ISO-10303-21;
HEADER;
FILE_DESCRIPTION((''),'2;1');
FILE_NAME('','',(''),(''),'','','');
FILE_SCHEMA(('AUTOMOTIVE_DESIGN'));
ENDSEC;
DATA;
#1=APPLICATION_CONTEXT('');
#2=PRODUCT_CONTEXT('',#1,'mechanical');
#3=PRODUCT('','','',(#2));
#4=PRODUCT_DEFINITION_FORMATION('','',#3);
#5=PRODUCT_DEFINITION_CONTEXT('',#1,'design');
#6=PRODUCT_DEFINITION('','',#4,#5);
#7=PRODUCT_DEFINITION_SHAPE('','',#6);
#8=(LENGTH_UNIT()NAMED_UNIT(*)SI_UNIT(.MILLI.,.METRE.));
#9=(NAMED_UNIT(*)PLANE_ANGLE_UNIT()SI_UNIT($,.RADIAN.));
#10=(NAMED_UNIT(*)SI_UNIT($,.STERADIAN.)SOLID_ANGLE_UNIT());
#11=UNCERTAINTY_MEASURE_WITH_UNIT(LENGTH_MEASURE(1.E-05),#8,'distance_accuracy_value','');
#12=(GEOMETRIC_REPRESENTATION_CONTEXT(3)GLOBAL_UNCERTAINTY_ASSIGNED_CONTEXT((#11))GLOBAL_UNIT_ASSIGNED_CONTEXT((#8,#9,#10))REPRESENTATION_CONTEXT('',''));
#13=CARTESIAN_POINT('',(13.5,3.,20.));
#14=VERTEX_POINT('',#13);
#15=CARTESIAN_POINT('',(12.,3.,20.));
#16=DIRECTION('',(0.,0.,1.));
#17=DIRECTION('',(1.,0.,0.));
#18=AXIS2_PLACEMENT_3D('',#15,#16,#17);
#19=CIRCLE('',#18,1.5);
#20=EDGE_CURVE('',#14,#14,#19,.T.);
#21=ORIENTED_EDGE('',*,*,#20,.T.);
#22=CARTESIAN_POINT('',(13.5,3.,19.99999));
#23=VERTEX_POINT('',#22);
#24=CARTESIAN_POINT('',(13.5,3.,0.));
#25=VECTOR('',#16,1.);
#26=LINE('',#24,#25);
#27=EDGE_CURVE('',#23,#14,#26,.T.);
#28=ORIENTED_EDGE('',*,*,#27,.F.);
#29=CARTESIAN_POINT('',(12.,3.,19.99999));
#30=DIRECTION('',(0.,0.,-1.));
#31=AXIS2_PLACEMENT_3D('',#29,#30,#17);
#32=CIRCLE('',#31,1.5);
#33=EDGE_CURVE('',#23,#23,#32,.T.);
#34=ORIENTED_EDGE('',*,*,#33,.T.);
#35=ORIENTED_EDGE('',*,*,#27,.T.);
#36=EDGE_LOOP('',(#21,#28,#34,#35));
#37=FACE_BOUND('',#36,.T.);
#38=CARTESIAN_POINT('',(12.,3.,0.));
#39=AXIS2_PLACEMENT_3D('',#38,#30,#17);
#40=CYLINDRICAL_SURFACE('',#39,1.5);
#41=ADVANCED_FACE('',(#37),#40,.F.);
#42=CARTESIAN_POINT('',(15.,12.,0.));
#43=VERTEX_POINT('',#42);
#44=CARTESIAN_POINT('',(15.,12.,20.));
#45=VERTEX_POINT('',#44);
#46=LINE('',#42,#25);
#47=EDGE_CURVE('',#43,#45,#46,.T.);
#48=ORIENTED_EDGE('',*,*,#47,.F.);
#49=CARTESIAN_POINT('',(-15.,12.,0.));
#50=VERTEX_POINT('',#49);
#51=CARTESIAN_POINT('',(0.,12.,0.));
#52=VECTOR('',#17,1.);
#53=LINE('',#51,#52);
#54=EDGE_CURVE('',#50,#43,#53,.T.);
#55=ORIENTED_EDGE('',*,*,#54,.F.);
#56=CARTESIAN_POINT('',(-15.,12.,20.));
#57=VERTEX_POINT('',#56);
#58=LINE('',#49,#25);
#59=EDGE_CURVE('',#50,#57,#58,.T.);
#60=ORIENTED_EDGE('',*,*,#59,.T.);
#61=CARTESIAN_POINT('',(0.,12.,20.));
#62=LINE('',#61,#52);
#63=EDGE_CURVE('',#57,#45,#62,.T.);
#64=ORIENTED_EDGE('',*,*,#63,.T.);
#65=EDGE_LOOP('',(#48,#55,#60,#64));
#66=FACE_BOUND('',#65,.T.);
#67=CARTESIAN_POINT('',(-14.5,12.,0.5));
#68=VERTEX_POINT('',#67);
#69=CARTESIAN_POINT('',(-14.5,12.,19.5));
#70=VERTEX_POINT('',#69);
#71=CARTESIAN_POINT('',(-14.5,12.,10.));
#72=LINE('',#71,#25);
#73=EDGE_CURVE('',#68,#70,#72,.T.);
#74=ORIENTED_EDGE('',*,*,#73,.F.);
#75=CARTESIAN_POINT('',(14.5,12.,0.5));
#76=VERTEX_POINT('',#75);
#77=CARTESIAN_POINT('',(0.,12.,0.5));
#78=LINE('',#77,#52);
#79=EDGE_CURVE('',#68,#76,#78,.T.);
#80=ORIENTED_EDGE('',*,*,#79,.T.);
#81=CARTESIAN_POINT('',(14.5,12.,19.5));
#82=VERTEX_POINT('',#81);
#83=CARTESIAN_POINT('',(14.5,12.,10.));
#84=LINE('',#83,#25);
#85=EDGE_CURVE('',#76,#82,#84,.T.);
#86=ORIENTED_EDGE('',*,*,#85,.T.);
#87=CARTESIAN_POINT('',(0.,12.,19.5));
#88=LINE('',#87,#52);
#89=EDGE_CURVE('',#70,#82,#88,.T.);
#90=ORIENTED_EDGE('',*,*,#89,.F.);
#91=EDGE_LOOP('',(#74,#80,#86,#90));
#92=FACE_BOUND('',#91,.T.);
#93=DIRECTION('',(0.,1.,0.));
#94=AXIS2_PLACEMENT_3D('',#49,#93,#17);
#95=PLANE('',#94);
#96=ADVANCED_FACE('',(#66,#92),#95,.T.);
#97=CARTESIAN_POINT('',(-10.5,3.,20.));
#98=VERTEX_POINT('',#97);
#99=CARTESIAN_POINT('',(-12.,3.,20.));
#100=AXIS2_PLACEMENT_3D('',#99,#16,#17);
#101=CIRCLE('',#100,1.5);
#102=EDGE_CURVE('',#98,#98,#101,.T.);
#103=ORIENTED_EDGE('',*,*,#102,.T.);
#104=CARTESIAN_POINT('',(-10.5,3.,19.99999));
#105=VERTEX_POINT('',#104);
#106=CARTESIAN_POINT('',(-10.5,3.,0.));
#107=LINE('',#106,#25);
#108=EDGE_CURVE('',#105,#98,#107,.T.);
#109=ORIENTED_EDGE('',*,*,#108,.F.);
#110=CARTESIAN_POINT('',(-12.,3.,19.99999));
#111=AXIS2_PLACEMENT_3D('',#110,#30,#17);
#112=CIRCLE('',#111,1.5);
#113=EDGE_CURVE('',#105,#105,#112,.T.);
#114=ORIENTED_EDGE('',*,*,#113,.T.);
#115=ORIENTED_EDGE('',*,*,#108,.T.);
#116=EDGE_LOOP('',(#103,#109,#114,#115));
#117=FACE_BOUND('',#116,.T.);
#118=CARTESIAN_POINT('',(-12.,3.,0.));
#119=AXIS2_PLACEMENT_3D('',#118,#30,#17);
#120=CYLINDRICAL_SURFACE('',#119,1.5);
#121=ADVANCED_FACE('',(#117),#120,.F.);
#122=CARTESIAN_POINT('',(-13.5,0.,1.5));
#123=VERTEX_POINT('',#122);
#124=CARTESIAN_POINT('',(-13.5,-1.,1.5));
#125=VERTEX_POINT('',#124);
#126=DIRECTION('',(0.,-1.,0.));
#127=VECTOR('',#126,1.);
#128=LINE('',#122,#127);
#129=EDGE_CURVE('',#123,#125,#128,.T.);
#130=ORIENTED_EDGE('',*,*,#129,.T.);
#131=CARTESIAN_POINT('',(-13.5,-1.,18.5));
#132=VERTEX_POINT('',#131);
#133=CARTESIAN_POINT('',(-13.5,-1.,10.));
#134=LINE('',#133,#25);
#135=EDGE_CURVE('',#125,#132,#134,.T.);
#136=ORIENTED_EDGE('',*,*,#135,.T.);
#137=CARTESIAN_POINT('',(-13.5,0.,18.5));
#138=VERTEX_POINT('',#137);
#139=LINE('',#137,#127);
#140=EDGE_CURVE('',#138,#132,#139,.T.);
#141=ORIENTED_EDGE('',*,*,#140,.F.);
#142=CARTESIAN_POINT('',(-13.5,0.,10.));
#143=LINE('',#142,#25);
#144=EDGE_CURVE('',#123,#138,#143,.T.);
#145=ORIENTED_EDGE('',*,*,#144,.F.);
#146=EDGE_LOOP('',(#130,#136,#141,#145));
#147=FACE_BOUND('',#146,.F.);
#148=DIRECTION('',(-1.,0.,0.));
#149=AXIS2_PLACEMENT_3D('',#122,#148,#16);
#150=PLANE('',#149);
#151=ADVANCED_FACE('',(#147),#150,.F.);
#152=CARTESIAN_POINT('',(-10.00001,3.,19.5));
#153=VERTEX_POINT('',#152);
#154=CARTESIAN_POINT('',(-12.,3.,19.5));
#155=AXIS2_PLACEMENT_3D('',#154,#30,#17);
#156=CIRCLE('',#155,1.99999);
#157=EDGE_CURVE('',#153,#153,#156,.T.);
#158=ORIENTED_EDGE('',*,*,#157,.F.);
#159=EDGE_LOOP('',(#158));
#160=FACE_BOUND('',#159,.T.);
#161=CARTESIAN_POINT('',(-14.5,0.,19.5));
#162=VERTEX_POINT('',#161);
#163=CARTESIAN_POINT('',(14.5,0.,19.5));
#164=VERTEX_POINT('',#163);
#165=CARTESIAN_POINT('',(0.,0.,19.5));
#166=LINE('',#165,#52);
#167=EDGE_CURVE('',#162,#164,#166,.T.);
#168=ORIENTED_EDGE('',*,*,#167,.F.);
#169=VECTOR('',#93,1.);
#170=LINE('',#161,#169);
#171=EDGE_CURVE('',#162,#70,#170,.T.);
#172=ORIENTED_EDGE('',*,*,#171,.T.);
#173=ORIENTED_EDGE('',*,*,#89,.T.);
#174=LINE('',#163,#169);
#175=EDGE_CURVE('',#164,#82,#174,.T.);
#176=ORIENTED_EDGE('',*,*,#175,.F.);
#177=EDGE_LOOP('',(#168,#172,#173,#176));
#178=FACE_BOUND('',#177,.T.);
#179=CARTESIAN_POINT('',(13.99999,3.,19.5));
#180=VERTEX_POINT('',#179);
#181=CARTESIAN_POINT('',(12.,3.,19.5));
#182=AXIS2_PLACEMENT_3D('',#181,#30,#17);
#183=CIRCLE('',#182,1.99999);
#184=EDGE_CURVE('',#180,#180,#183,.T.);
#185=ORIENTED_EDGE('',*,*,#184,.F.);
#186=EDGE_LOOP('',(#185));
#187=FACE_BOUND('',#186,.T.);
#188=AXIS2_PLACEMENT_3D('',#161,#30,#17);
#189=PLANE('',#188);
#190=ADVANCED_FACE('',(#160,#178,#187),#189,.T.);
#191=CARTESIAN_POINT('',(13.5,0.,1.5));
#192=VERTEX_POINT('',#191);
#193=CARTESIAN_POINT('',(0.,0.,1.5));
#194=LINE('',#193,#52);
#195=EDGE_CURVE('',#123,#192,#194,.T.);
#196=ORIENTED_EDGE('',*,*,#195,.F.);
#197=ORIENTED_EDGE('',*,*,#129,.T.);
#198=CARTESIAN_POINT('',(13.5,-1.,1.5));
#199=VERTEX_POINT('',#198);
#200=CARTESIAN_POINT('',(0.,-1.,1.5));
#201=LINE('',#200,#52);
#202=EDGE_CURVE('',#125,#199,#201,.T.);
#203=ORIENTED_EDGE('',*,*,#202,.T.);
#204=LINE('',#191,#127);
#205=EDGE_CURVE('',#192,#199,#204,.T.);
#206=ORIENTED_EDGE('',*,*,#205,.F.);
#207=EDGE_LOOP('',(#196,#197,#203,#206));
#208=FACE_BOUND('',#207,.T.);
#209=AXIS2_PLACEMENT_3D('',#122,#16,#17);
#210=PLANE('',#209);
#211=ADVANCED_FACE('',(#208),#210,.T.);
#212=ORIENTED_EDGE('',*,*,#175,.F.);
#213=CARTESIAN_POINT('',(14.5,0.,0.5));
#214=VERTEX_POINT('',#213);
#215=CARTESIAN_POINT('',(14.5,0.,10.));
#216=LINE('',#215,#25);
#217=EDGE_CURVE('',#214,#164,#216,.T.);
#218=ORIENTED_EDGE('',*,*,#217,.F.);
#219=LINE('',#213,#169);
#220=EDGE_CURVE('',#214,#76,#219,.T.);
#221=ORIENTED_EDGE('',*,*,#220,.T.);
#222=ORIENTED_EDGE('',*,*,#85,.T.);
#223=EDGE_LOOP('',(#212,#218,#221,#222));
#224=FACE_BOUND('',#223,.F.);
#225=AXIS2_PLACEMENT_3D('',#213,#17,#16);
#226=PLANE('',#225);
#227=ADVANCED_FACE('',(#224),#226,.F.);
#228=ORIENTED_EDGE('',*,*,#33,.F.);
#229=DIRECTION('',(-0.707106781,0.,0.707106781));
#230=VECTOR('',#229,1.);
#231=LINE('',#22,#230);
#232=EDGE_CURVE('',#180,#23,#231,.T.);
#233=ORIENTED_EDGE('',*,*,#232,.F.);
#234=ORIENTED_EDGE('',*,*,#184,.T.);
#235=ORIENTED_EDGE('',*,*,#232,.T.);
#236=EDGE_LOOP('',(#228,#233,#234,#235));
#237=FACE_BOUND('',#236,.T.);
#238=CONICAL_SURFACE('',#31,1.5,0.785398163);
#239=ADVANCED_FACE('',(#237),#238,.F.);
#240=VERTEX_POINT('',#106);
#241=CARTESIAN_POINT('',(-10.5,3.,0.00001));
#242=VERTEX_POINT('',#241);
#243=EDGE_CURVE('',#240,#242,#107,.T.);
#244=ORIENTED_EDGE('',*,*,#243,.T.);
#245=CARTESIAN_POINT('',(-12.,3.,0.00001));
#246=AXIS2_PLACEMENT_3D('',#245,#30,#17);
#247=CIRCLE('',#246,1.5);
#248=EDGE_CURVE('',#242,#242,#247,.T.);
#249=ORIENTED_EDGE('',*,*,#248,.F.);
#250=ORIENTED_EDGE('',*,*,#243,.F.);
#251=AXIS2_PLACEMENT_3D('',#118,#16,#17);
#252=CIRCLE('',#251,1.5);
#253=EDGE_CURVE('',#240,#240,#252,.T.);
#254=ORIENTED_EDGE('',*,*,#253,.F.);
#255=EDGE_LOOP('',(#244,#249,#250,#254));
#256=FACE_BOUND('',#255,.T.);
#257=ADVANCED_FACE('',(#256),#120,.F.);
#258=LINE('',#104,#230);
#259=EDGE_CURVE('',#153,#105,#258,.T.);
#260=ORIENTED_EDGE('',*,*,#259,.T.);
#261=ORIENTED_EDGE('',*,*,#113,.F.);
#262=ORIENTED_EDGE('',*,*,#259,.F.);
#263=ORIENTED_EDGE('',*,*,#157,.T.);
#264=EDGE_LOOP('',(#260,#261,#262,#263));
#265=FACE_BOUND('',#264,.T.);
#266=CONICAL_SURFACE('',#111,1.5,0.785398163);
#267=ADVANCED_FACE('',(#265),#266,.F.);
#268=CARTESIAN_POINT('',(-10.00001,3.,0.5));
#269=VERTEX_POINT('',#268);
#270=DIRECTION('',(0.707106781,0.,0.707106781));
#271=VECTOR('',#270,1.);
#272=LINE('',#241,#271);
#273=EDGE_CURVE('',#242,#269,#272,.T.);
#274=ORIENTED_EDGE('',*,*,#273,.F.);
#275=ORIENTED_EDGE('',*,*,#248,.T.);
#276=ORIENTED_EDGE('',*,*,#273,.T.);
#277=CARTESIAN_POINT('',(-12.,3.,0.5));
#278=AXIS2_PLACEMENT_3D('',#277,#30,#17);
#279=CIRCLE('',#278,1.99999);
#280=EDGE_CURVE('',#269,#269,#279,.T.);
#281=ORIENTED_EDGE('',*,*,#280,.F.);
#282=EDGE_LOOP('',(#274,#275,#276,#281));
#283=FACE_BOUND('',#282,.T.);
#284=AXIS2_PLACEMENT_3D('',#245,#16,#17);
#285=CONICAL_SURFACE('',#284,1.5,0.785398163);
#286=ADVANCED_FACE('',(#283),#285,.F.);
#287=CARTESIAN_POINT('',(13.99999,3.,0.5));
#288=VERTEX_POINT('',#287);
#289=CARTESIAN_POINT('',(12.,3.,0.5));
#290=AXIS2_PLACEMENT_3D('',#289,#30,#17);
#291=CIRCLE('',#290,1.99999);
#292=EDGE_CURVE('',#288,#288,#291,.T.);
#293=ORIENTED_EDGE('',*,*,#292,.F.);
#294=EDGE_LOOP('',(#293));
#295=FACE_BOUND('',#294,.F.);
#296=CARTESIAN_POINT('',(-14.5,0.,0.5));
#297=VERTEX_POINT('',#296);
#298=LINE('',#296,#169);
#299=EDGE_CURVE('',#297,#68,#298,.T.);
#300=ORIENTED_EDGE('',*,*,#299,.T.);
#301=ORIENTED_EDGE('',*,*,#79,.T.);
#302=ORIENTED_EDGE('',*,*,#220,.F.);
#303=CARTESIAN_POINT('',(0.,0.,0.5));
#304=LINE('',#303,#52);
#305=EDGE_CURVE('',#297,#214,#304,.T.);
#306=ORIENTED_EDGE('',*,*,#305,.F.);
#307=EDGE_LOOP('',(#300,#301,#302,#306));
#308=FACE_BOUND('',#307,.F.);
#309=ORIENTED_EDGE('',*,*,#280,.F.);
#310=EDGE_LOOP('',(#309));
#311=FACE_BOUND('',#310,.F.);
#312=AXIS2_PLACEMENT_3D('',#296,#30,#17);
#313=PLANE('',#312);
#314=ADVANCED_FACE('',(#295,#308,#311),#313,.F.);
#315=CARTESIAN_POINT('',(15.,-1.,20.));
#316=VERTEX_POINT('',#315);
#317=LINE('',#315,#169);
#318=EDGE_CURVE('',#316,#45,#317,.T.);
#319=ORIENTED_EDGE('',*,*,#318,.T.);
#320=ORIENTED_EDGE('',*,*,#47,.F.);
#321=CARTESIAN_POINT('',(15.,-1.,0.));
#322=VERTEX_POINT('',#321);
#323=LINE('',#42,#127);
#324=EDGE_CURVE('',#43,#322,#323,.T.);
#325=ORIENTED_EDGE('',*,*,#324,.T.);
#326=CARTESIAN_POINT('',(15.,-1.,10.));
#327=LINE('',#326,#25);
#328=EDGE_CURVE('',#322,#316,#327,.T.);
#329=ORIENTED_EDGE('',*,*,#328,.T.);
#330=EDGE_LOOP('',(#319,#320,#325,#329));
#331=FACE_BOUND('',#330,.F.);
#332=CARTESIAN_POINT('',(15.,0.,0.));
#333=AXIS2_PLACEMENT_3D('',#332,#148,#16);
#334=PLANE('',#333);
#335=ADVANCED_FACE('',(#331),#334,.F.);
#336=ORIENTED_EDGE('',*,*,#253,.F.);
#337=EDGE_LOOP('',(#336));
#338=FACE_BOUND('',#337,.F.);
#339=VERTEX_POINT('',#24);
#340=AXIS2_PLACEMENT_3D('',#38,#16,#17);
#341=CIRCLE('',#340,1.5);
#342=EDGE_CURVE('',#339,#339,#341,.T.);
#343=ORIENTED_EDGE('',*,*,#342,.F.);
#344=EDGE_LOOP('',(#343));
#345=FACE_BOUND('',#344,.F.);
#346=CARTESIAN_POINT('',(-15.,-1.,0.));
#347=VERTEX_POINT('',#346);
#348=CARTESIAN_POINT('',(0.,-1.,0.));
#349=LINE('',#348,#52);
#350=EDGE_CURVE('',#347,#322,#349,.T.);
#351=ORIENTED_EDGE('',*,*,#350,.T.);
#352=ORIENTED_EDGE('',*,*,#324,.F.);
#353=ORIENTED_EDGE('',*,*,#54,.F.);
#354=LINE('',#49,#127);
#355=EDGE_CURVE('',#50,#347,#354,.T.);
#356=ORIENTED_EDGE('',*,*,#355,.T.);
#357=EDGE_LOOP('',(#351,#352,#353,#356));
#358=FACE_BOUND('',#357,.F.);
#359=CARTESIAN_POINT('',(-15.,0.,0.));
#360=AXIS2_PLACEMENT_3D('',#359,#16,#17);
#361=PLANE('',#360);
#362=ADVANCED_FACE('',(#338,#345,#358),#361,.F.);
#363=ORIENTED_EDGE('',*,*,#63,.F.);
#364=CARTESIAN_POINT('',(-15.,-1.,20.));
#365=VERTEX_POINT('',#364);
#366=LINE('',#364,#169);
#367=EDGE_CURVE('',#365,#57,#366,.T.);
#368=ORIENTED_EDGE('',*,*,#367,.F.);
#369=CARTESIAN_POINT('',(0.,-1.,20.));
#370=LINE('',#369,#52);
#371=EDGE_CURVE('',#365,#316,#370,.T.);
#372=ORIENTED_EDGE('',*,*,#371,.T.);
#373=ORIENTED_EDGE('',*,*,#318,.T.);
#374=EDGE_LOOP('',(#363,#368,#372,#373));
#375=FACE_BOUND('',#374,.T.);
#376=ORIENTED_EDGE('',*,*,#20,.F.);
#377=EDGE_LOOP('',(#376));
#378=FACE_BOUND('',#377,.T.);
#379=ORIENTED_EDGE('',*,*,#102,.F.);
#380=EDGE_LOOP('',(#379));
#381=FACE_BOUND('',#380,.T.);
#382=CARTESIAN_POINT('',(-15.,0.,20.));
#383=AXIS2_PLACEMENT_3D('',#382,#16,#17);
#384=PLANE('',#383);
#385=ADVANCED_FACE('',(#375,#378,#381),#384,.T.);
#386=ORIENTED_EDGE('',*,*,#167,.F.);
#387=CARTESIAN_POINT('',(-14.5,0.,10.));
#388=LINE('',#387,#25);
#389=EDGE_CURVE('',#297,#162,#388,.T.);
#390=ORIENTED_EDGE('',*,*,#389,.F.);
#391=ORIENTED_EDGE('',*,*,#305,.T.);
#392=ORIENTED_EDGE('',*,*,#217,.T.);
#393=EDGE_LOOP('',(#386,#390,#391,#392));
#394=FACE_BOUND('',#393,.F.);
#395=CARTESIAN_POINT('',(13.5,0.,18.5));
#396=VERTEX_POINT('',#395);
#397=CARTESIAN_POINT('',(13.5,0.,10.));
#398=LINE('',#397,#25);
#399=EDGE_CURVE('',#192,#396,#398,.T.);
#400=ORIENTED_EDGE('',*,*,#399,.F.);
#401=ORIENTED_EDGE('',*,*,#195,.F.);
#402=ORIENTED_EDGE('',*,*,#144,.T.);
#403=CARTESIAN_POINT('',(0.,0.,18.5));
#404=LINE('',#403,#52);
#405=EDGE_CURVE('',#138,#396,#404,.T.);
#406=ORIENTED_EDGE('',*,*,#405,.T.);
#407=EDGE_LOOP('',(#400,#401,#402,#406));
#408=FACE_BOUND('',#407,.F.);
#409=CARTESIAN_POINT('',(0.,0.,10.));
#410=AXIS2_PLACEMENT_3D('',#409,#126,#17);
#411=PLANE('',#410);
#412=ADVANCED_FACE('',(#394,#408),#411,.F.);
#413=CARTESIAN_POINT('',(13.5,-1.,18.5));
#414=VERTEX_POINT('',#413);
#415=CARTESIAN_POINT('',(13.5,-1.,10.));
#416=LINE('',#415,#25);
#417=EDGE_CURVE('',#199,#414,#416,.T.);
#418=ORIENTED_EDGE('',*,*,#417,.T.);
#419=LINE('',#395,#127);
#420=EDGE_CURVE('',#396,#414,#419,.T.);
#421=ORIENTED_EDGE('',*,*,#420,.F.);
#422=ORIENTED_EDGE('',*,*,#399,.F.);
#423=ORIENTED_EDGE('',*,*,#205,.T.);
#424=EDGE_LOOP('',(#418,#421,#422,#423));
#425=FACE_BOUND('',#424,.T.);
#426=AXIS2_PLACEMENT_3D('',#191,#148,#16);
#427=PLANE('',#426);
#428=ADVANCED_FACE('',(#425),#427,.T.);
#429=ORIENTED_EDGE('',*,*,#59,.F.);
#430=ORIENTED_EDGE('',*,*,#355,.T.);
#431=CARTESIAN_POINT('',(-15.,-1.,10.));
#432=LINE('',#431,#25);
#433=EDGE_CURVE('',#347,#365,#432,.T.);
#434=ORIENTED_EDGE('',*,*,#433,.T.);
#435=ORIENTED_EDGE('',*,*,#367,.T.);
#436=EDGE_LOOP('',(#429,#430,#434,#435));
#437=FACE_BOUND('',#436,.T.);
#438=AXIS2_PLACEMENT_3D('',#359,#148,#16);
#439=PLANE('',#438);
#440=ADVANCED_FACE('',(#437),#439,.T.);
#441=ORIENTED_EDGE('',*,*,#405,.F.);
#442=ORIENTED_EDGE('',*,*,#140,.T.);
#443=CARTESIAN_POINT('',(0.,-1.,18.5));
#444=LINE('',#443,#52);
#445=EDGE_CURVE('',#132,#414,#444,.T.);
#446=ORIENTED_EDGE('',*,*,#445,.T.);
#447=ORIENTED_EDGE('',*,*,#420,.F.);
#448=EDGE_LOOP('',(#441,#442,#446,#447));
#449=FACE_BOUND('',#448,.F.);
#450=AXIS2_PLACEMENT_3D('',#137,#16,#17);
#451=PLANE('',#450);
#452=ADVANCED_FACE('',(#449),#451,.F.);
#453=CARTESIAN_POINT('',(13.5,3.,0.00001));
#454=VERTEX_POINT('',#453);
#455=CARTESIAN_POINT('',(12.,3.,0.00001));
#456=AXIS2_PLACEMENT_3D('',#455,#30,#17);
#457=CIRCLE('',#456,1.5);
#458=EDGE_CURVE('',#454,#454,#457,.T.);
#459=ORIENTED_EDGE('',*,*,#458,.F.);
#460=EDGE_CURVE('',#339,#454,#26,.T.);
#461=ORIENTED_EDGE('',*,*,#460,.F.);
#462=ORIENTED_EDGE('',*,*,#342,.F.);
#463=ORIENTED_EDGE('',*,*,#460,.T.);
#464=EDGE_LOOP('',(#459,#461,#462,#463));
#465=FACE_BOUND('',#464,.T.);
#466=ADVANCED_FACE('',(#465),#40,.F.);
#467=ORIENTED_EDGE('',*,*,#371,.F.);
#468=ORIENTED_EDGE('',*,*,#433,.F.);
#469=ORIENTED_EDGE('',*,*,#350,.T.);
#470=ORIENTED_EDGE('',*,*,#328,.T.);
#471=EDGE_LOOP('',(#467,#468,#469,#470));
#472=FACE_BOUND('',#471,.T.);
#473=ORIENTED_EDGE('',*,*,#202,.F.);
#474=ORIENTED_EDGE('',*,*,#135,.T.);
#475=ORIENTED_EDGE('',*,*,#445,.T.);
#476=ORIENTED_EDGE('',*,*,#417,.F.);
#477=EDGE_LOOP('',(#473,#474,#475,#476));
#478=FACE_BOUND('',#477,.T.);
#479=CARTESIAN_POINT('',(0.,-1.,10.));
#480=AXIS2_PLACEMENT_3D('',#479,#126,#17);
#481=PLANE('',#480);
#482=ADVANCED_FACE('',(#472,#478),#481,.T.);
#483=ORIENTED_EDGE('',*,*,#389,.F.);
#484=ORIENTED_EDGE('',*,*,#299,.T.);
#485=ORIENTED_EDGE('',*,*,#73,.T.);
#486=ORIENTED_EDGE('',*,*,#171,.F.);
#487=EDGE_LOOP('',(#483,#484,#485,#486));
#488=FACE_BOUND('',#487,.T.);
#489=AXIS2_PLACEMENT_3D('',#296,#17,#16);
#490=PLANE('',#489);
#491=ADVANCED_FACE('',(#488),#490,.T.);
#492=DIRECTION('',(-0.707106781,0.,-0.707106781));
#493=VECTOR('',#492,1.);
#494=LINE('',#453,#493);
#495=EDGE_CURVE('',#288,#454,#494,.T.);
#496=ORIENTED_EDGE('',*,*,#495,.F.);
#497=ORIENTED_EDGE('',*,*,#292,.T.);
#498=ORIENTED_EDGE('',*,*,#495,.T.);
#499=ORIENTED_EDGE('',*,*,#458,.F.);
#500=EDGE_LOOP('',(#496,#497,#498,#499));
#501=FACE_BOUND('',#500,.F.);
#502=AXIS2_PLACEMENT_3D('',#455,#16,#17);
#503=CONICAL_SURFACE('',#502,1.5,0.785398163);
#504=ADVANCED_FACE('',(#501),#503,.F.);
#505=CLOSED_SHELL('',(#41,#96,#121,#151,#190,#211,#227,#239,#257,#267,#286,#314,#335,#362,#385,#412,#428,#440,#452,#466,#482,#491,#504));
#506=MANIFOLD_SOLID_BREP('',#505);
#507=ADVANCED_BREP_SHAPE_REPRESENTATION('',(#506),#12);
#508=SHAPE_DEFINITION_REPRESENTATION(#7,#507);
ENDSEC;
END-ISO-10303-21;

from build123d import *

# Parameters (mm, degrees)
F0_W     = 30
F0_H     = 12
F0_R     = 1.5
F1_DEPTH = 20
F2_W     = 29
F2_H     = 19
F2_W_2   = 27
F2_H_2   = 17
F3_DEPTH = 12
F2_W_3   = 30
F2_H_3   = 20
F4_DEPTH = 1
F5_SIZE2 = 0.49999
F5_SIZE  = 0.49999


# Not quite as in the source:
# - a fillet or chamfer is up to 0.001 mm smaller than in the source, because OpenCascade refuses the exact size


with BuildPart() as f1:
    # F0 (on Top) → F1 (new body)
    with BuildSketch(Plane.XY):
        with Locations((0, 6)):
            Rectangle(F0_W, F0_H)
        with Locations((-12, 3)):
            Circle(F0_R, mode=Mode.SUBTRACT)
        with Locations((12, 3)):
            Circle(F0_R, mode=Mode.SUBTRACT)
    extrude(amount=F1_DEPTH)

    # F2 (on Front) → F3 (cut)
    with BuildSketch(Plane.XZ):
        with Locations((0, 10)):
            Rectangle(F2_W, F2_H)
        with Locations((0, 10)):
            Rectangle(F2_W_2, F2_H_2, mode=Mode.SUBTRACT)
        with Locations((0, 10)):
            Rectangle(F2_W_2, F2_H_2)
    extrude(amount=-F3_DEPTH, mode=Mode.SUBTRACT)

    # F2 (on Front) → F4 (join)
    with BuildSketch(Plane.XZ):
        with Locations((0, 10)):
            Rectangle(F2_W_3, F2_H_3)
        with Locations((0, 10)):
            Rectangle(F2_W, F2_H, mode=Mode.SUBTRACT)
        with Locations((0, 10)):
            Rectangle(F2_W, F2_H)
        with Locations((0, 10)):
            Rectangle(F2_W_2, F2_H_2, mode=Mode.SUBTRACT)
    extrude(amount=F4_DEPTH)

    # F5 (size 0.5 and 0.5 in the source; OpenCascade refuses exactly that, so slightly less here)
    f5_edges = [f1.edges().sort_by_distance(p)[0] for p in [
        (-13.5, 3, 0.5),
        (10.5, 3, 0.5),
        (10.5, 3, 19.5),
        (-13.5, 3, 19.5),
    ]]
    chamfer(f5_edges, length=F5_SIZE, length2=F5_SIZE2)


solid = f1.part
